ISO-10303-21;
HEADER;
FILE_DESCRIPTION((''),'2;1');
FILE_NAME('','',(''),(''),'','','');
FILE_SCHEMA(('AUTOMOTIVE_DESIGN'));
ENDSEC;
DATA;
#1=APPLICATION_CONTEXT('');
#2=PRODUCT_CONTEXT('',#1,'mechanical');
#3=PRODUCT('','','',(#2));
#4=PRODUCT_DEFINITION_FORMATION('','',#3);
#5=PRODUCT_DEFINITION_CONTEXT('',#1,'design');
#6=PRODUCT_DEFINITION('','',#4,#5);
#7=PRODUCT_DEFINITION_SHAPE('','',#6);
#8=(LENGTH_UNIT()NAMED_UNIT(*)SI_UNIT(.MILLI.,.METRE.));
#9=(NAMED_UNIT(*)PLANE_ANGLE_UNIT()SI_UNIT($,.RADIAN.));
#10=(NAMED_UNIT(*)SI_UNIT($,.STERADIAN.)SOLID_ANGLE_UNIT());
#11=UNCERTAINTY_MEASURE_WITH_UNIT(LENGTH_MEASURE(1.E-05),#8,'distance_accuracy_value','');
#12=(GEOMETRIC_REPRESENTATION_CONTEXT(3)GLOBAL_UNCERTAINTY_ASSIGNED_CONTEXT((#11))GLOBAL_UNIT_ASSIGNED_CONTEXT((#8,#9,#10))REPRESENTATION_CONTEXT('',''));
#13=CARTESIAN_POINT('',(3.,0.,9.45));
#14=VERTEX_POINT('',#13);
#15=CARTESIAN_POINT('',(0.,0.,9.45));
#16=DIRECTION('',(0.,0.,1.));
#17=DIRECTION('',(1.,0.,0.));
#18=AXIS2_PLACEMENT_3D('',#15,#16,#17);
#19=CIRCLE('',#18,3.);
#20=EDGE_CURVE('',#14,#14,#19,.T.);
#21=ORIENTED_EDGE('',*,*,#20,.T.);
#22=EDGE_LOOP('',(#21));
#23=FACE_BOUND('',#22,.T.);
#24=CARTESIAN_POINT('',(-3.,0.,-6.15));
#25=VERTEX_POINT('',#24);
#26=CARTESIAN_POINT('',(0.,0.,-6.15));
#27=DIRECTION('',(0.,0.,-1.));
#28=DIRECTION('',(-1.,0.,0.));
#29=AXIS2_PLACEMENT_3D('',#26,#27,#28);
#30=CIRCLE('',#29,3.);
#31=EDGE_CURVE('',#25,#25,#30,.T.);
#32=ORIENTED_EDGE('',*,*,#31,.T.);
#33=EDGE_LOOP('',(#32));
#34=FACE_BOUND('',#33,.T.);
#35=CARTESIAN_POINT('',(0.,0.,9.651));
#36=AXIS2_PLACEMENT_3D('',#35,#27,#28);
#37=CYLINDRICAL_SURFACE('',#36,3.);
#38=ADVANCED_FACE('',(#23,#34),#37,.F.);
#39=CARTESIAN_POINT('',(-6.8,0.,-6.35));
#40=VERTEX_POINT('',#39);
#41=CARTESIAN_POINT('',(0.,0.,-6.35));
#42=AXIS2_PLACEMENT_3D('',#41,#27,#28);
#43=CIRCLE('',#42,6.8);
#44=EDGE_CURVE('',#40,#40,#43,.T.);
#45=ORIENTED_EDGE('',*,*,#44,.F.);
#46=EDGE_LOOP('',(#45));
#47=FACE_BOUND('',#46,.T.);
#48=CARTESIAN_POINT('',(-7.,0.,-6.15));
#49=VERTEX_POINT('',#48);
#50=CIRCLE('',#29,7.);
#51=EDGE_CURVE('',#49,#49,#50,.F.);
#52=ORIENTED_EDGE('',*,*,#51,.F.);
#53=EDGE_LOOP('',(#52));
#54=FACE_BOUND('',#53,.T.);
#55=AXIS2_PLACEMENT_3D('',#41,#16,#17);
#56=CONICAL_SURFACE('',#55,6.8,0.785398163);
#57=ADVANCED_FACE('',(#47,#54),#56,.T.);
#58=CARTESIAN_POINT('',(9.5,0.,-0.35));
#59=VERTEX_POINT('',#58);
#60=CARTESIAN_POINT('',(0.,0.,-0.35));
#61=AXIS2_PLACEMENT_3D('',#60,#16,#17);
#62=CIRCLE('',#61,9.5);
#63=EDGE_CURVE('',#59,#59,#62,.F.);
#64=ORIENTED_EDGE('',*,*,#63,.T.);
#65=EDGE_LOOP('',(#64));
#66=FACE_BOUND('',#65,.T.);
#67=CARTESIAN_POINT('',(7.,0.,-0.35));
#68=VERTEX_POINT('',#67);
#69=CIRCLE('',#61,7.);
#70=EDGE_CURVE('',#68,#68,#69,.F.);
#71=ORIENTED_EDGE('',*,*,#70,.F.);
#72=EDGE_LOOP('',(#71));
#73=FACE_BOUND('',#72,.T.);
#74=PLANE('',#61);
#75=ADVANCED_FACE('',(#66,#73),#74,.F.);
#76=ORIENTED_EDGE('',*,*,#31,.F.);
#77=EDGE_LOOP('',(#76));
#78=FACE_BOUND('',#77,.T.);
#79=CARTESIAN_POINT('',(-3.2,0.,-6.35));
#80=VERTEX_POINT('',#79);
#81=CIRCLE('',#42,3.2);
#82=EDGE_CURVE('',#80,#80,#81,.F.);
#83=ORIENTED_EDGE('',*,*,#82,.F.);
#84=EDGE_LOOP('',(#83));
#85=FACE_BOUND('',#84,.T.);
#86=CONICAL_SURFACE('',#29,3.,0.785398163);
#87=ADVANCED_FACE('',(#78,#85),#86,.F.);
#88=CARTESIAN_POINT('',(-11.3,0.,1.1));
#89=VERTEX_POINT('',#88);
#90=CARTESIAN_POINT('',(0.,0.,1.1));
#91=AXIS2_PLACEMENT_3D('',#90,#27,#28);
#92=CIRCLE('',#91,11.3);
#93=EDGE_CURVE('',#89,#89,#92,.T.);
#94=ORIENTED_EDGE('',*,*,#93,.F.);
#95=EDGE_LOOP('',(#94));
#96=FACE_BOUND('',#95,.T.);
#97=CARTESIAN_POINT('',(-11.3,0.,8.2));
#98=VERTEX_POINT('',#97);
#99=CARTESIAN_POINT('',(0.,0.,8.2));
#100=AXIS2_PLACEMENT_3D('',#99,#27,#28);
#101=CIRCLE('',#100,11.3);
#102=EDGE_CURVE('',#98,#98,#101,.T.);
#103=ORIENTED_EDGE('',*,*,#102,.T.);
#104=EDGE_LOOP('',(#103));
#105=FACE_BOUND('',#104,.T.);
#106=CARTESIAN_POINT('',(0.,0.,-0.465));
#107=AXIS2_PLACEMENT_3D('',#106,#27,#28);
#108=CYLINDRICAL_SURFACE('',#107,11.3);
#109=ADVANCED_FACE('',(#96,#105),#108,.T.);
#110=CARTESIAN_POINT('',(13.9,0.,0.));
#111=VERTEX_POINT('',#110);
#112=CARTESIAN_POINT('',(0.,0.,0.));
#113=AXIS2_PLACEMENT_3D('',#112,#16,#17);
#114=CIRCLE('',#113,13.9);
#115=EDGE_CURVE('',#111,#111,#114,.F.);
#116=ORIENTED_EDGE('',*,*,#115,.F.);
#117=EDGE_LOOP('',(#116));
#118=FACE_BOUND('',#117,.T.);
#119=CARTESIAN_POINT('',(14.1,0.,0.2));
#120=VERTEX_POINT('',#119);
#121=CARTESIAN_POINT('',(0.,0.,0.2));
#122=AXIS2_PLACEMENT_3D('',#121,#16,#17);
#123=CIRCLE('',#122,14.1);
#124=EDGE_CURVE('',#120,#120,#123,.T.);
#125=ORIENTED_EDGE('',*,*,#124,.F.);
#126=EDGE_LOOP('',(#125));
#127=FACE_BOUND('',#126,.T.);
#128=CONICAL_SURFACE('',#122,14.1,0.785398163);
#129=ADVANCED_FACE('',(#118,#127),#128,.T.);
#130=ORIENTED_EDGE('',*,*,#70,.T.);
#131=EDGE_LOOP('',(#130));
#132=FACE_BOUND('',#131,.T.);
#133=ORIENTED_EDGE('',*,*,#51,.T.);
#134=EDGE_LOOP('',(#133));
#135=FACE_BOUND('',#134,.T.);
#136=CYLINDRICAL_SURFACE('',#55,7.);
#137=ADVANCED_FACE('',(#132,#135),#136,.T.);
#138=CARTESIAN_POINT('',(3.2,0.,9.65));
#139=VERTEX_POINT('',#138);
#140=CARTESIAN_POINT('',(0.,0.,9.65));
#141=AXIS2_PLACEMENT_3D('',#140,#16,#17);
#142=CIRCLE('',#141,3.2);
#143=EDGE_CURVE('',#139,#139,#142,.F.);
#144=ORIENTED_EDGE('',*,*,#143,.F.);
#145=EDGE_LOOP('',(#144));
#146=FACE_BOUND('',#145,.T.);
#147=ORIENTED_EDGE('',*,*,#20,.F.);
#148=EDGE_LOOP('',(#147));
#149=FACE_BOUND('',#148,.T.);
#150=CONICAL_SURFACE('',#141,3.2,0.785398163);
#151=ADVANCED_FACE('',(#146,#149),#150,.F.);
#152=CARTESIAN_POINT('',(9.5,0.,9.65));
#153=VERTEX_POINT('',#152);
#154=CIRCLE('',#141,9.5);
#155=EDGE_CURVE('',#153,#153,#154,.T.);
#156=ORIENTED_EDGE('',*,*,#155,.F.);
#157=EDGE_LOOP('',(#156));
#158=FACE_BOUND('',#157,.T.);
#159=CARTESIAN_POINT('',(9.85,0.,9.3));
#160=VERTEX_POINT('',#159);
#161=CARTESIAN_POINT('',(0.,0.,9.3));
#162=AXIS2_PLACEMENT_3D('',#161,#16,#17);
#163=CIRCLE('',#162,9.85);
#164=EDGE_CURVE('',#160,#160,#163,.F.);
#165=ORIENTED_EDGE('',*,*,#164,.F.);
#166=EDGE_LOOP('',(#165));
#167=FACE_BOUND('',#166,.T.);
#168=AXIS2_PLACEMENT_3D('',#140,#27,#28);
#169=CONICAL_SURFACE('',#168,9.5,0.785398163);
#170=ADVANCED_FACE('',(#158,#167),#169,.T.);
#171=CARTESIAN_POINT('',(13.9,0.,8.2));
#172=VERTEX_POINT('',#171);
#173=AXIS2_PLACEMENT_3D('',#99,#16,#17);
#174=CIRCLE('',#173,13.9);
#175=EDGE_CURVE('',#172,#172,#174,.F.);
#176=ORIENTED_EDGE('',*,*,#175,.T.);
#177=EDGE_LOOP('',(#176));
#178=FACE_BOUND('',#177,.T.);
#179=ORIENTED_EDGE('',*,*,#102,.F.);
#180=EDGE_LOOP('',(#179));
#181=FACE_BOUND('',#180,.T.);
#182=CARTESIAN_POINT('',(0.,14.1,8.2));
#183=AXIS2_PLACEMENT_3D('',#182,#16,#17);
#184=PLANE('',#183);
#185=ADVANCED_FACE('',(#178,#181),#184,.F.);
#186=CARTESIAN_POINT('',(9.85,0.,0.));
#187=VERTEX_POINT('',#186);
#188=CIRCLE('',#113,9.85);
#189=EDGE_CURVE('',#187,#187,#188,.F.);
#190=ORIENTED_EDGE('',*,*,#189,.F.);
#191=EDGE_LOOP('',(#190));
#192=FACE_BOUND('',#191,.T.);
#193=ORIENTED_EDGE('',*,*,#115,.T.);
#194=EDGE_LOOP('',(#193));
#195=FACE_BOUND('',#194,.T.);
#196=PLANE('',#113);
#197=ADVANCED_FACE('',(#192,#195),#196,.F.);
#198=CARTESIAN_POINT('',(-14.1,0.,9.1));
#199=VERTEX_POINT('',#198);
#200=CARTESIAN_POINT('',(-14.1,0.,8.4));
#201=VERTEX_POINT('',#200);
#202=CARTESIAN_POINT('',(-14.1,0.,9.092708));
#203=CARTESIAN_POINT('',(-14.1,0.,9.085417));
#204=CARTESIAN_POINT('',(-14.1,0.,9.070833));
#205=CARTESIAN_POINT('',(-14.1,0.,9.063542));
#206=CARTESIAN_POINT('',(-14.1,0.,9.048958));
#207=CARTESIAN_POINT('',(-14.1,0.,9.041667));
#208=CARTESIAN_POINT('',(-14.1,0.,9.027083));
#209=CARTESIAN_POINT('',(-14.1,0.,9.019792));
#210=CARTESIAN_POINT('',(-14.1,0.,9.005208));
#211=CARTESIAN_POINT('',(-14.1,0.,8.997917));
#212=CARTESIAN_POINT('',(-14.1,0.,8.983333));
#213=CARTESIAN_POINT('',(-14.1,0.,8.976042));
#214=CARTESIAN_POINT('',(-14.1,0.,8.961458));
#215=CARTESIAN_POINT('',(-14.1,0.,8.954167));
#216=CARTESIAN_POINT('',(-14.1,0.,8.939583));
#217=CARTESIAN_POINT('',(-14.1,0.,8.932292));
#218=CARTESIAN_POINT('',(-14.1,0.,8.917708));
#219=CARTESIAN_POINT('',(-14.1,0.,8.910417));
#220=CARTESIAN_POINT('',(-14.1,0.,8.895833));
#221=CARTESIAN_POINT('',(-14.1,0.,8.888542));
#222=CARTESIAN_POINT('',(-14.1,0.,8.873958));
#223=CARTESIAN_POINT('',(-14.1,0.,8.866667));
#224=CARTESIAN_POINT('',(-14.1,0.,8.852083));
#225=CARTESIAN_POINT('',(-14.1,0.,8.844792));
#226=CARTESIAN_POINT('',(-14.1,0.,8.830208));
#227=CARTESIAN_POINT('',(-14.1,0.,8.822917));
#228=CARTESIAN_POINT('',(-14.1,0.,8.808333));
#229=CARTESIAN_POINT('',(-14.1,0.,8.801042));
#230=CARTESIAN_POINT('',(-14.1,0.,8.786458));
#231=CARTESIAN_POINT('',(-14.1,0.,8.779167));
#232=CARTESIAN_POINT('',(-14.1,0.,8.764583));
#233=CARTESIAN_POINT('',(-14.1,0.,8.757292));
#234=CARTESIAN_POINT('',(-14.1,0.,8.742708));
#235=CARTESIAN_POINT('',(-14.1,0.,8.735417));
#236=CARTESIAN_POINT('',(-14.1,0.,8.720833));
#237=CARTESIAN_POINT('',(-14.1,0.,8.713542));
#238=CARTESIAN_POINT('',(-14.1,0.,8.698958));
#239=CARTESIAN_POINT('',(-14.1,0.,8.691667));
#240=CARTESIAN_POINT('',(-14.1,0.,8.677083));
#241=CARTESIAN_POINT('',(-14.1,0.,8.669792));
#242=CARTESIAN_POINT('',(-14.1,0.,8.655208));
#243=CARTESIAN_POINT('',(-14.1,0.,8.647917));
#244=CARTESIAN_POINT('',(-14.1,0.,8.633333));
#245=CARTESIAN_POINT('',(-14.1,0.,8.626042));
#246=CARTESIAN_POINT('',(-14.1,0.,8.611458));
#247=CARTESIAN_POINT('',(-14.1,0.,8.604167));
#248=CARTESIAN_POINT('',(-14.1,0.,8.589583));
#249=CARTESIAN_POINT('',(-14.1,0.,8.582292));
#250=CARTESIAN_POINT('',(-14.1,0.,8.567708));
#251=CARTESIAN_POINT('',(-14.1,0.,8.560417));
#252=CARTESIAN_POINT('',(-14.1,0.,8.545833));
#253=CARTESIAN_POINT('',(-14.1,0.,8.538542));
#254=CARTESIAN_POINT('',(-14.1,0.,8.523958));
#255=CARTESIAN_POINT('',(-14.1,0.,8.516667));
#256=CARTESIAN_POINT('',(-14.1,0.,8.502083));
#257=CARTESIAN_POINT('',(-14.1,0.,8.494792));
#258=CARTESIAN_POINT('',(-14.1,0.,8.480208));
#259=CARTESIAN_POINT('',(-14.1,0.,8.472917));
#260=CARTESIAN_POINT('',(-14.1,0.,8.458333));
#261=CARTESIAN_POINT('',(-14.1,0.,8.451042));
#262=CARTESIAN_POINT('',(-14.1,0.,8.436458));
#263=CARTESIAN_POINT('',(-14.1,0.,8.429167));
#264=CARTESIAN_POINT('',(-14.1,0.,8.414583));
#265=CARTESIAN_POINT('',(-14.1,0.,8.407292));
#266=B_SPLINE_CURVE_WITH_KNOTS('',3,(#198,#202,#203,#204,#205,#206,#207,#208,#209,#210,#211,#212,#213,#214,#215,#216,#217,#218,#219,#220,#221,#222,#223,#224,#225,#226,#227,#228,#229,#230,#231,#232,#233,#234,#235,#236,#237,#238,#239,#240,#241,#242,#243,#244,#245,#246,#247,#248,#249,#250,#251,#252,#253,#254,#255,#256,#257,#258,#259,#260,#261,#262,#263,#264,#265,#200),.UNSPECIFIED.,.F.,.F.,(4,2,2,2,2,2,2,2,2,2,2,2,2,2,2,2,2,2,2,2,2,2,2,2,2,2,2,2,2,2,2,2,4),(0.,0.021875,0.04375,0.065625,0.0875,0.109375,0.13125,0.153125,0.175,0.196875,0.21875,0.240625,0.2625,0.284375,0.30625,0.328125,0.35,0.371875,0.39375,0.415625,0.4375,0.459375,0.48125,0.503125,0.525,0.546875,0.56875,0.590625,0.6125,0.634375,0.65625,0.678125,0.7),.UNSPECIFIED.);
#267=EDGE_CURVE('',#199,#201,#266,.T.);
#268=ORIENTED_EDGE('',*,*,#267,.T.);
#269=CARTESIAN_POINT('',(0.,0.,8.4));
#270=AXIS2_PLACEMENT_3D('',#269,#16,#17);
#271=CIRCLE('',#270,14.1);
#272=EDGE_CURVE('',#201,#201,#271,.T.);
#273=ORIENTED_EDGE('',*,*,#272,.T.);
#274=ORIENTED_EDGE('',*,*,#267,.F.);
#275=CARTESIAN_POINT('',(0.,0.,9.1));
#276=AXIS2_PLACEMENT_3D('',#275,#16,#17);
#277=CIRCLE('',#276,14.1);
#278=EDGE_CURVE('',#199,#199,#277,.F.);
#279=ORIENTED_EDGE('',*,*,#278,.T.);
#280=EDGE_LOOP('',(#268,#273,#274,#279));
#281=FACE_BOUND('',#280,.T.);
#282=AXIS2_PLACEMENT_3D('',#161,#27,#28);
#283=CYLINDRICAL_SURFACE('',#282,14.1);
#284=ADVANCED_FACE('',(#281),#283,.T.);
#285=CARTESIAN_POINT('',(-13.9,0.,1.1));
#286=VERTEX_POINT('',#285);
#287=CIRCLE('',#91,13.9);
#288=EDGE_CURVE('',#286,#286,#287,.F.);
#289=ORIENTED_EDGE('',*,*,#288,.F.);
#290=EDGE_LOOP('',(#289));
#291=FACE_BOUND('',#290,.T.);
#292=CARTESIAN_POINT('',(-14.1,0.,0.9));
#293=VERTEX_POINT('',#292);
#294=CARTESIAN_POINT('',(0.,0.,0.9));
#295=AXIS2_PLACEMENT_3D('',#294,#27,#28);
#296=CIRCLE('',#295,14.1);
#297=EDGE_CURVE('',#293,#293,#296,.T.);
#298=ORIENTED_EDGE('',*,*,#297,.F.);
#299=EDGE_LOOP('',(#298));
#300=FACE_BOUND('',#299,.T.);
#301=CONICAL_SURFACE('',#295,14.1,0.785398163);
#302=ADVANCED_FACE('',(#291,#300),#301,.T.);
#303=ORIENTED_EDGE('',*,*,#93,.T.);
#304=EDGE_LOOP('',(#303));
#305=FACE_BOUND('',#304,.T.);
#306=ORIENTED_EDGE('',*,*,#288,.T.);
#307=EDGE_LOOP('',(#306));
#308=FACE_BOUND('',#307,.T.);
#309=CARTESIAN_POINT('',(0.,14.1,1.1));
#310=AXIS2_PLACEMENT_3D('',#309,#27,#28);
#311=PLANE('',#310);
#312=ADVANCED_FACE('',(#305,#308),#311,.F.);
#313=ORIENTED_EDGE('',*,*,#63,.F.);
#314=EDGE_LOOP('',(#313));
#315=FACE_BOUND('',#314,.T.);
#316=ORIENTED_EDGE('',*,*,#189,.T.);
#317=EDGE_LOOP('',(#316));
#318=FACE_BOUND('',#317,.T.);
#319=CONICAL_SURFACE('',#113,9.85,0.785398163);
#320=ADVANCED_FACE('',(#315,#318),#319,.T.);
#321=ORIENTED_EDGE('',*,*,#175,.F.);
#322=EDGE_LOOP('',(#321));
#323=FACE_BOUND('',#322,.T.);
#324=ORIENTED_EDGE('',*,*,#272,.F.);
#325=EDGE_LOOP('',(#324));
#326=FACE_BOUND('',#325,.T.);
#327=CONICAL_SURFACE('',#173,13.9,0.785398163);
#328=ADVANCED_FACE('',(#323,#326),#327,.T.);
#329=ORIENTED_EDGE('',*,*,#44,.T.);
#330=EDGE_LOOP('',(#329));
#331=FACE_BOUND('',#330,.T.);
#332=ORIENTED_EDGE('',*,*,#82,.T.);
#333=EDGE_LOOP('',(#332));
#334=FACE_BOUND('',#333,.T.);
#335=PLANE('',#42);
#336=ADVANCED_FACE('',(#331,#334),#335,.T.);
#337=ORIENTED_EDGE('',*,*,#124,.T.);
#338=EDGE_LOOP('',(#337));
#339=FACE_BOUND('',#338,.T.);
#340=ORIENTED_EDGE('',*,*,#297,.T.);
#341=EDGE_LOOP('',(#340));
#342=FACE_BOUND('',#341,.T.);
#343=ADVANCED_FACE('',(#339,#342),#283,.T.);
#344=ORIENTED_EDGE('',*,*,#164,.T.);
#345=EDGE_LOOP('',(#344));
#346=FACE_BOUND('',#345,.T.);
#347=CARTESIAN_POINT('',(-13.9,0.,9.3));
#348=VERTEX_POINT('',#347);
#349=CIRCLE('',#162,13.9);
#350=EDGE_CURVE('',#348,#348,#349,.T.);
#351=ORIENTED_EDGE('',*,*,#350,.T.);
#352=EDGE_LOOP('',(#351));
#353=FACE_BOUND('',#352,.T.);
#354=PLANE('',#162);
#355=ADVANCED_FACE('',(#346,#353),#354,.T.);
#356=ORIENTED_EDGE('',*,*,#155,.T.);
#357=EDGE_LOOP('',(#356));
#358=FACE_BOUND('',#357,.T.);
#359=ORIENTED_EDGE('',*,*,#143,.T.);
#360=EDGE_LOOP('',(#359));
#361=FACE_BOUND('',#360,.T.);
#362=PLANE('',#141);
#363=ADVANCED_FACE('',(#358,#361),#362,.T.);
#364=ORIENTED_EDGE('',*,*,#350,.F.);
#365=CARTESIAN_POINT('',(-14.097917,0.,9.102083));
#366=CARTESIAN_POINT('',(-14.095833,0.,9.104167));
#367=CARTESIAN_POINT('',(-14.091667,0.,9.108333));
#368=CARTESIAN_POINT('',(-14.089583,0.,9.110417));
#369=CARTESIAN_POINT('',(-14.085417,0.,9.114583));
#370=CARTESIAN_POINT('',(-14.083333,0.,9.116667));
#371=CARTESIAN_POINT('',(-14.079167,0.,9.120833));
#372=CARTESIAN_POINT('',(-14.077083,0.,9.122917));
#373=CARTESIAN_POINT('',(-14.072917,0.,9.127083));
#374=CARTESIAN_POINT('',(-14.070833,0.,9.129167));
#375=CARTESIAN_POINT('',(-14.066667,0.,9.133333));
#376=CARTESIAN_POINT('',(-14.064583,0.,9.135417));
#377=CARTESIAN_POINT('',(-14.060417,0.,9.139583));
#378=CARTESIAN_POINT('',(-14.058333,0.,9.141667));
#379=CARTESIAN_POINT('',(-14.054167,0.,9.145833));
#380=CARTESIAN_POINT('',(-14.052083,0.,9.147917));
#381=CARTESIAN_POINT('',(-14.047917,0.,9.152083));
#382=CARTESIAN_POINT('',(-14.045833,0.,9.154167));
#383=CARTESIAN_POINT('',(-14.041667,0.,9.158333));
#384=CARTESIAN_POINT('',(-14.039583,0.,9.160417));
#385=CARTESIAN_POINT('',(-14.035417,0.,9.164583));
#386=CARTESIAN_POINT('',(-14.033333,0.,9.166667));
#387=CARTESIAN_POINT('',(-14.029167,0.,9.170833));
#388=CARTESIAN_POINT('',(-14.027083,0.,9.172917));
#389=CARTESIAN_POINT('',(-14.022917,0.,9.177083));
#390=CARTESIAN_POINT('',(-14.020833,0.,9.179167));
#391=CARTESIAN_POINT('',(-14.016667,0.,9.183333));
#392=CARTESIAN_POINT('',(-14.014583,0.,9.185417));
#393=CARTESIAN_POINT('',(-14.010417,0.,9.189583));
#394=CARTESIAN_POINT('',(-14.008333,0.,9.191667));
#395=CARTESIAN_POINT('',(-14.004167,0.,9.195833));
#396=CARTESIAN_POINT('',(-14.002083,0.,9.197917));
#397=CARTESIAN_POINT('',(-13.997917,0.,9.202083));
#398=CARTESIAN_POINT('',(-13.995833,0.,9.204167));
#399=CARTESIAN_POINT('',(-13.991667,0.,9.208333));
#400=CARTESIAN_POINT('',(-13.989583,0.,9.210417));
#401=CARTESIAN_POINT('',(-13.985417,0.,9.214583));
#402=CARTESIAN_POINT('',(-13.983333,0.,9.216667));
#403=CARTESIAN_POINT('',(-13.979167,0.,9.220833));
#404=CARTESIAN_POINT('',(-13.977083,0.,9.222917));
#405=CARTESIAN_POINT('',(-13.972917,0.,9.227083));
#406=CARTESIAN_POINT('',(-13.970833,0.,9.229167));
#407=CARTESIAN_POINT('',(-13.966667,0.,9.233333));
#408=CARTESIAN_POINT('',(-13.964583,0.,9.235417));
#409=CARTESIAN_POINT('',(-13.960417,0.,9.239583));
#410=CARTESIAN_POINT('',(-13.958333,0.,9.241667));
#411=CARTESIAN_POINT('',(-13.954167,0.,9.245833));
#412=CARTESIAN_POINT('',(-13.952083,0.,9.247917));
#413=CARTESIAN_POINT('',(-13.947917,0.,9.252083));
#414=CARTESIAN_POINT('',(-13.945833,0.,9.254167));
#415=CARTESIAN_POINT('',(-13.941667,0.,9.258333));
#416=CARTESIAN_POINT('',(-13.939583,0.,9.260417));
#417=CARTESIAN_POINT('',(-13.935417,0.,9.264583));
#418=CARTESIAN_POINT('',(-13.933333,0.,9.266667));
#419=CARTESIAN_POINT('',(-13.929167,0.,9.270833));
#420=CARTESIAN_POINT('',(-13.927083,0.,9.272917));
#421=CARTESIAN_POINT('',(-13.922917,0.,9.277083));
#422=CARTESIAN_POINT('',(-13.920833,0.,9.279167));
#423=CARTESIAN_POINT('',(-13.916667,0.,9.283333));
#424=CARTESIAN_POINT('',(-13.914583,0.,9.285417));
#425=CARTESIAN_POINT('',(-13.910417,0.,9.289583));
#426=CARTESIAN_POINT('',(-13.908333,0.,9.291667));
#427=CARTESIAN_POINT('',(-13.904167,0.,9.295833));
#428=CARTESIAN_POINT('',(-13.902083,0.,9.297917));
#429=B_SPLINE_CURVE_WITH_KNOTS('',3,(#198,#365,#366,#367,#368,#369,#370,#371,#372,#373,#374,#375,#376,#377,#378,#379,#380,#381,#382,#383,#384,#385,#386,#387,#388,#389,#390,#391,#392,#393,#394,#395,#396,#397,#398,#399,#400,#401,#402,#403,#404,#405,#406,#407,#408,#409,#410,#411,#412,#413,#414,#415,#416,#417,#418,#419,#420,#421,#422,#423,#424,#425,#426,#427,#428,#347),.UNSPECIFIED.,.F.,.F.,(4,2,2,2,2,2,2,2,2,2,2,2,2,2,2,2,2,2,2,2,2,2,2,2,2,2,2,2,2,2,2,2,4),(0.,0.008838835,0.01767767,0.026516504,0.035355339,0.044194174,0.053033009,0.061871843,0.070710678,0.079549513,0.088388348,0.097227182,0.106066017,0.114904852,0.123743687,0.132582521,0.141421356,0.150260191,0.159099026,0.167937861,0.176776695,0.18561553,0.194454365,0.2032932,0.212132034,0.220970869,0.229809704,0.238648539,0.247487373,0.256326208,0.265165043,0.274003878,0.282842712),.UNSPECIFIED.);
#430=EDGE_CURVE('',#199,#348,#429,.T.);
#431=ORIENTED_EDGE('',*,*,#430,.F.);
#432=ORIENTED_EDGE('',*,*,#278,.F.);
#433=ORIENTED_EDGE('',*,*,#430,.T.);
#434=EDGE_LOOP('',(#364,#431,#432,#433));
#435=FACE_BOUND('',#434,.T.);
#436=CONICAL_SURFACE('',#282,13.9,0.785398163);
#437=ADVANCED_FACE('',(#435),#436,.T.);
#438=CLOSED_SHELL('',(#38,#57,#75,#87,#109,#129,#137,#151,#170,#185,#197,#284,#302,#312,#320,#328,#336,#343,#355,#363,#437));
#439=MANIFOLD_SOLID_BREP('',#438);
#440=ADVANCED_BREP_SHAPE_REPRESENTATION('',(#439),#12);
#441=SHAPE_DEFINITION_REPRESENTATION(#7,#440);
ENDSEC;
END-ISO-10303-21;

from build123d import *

# Parameters (mm, degrees)
SKETCH1_R                = 14.1
BOSS_EXTRUDE1_DEPTH      = 9.3
SKETCH2_W                = 7.1
SKETCH2_H                = 2.8
BOSS_EXTRUDE2_DEPTH      = 0.35
BOSS_EXTRUDE2_DEPTH_BACK = 9.65
SKETCH3_R                = 9.85
CHAMFER1_SIZE            = 0.35
SKETCH4_R                = 7
BOSS_EXTRUDE3_DEPTH      = 6
CUT_EXTRUDE1_REACH       = 27.566
SKETCH5_R                = 3
CHAMFER2_SIZE            = 0.2


with BuildPart() as part:
    # Sketch1 → Boss-Extrude1 (new body)
    with BuildSketch(Plane.XY):
        Circle(SKETCH1_R)
    extrude(amount=BOSS_EXTRUDE1_DEPTH)

    # Sketch2 → Cut-Revolve1 (revolve, cut)
    with BuildSketch(Plane(origin=(0, 0, 0), x_dir=(0, 0, -1), z_dir=(1, 0, 0)), mode=Mode.PRIVATE) as cut_revolve1_sk:
        with Locations((-4.65, 12.7)):
            Rectangle(SKETCH2_W, SKETCH2_H)
    revolve(cut_revolve1_sk.sketch.rotate(Axis((0, 0, -195813.923931263), (0, 0, -1)), 270), axis=Axis((0, 0, -195813.923931263), (0, 0, -1)), mode=Mode.SUBTRACT)

    # Sketch3 → Boss-Extrude2 (add, two sides: drawn at the far end of the back side and taken through both)
    with BuildSketch(Plane.XY.offset(9.3).offset(-BOSS_EXTRUDE2_DEPTH_BACK)):
        Circle(SKETCH3_R)
    extrude(amount=BOSS_EXTRUDE2_DEPTH + BOSS_EXTRUDE2_DEPTH_BACK)

    # Chamfer1
    chamfer1_edges = [part.edges().sort_by_distance(p)[0] for p in [
        (-9.85, 0, -0.35),
        (-9.85, 0, 9.65),
    ]]
    chamfer(chamfer1_edges, length=CHAMFER1_SIZE - 0.0001)  # a hair under: the kernel refuses the full size

    # Sketch4 → Boss-Extrude3 (add)
    with BuildSketch(Plane(origin=(0, 0, -0.35), x_dir=(-1, 0, 0), z_dir=(0, 0, -1))):
        with Locations(Location((0, 0, 0), (0, 0, 180))):
            Circle(SKETCH4_R)
    extrude(amount=BOSS_EXTRUDE3_DEPTH)

    # Sketch5 → Cut-Extrude1 (cut, up to next)
    with BuildSketch(Plane(origin=(0, 0, -6.35), x_dir=(-1, 0, 0), z_dir=(0, 0, -1)), mode=Mode.PRIVATE) as cut_extrude1_sk1:
        Circle(SKETCH5_R)
    cut_extrude1_tool1 = extrude(cut_extrude1_sk1.sketch, amount=-CUT_EXTRUDE1_REACH, mode=Mode.PRIVATE) & part.part
    add(cut_extrude1_tool1.solids().sort_by_distance((0, 0, -6.35))[0], mode=Mode.SUBTRACT)

    # Chamfer2
    chamfer2_edges = [part.edges().sort_by_distance(p)[0] for p in [
        (-14.1, 0, 0),
        (-7, 0, -6.35),
        (3, 0, 9.65),
        (3, 0, -6.35),
        (-14.1, 0, 9.3),
        (-14.1, 0, 1.1),
        (-14.1, 0, 8.2),
    ]]
    chamfer(chamfer2_edges, length=CHAMFER2_SIZE)


solid = part.part
